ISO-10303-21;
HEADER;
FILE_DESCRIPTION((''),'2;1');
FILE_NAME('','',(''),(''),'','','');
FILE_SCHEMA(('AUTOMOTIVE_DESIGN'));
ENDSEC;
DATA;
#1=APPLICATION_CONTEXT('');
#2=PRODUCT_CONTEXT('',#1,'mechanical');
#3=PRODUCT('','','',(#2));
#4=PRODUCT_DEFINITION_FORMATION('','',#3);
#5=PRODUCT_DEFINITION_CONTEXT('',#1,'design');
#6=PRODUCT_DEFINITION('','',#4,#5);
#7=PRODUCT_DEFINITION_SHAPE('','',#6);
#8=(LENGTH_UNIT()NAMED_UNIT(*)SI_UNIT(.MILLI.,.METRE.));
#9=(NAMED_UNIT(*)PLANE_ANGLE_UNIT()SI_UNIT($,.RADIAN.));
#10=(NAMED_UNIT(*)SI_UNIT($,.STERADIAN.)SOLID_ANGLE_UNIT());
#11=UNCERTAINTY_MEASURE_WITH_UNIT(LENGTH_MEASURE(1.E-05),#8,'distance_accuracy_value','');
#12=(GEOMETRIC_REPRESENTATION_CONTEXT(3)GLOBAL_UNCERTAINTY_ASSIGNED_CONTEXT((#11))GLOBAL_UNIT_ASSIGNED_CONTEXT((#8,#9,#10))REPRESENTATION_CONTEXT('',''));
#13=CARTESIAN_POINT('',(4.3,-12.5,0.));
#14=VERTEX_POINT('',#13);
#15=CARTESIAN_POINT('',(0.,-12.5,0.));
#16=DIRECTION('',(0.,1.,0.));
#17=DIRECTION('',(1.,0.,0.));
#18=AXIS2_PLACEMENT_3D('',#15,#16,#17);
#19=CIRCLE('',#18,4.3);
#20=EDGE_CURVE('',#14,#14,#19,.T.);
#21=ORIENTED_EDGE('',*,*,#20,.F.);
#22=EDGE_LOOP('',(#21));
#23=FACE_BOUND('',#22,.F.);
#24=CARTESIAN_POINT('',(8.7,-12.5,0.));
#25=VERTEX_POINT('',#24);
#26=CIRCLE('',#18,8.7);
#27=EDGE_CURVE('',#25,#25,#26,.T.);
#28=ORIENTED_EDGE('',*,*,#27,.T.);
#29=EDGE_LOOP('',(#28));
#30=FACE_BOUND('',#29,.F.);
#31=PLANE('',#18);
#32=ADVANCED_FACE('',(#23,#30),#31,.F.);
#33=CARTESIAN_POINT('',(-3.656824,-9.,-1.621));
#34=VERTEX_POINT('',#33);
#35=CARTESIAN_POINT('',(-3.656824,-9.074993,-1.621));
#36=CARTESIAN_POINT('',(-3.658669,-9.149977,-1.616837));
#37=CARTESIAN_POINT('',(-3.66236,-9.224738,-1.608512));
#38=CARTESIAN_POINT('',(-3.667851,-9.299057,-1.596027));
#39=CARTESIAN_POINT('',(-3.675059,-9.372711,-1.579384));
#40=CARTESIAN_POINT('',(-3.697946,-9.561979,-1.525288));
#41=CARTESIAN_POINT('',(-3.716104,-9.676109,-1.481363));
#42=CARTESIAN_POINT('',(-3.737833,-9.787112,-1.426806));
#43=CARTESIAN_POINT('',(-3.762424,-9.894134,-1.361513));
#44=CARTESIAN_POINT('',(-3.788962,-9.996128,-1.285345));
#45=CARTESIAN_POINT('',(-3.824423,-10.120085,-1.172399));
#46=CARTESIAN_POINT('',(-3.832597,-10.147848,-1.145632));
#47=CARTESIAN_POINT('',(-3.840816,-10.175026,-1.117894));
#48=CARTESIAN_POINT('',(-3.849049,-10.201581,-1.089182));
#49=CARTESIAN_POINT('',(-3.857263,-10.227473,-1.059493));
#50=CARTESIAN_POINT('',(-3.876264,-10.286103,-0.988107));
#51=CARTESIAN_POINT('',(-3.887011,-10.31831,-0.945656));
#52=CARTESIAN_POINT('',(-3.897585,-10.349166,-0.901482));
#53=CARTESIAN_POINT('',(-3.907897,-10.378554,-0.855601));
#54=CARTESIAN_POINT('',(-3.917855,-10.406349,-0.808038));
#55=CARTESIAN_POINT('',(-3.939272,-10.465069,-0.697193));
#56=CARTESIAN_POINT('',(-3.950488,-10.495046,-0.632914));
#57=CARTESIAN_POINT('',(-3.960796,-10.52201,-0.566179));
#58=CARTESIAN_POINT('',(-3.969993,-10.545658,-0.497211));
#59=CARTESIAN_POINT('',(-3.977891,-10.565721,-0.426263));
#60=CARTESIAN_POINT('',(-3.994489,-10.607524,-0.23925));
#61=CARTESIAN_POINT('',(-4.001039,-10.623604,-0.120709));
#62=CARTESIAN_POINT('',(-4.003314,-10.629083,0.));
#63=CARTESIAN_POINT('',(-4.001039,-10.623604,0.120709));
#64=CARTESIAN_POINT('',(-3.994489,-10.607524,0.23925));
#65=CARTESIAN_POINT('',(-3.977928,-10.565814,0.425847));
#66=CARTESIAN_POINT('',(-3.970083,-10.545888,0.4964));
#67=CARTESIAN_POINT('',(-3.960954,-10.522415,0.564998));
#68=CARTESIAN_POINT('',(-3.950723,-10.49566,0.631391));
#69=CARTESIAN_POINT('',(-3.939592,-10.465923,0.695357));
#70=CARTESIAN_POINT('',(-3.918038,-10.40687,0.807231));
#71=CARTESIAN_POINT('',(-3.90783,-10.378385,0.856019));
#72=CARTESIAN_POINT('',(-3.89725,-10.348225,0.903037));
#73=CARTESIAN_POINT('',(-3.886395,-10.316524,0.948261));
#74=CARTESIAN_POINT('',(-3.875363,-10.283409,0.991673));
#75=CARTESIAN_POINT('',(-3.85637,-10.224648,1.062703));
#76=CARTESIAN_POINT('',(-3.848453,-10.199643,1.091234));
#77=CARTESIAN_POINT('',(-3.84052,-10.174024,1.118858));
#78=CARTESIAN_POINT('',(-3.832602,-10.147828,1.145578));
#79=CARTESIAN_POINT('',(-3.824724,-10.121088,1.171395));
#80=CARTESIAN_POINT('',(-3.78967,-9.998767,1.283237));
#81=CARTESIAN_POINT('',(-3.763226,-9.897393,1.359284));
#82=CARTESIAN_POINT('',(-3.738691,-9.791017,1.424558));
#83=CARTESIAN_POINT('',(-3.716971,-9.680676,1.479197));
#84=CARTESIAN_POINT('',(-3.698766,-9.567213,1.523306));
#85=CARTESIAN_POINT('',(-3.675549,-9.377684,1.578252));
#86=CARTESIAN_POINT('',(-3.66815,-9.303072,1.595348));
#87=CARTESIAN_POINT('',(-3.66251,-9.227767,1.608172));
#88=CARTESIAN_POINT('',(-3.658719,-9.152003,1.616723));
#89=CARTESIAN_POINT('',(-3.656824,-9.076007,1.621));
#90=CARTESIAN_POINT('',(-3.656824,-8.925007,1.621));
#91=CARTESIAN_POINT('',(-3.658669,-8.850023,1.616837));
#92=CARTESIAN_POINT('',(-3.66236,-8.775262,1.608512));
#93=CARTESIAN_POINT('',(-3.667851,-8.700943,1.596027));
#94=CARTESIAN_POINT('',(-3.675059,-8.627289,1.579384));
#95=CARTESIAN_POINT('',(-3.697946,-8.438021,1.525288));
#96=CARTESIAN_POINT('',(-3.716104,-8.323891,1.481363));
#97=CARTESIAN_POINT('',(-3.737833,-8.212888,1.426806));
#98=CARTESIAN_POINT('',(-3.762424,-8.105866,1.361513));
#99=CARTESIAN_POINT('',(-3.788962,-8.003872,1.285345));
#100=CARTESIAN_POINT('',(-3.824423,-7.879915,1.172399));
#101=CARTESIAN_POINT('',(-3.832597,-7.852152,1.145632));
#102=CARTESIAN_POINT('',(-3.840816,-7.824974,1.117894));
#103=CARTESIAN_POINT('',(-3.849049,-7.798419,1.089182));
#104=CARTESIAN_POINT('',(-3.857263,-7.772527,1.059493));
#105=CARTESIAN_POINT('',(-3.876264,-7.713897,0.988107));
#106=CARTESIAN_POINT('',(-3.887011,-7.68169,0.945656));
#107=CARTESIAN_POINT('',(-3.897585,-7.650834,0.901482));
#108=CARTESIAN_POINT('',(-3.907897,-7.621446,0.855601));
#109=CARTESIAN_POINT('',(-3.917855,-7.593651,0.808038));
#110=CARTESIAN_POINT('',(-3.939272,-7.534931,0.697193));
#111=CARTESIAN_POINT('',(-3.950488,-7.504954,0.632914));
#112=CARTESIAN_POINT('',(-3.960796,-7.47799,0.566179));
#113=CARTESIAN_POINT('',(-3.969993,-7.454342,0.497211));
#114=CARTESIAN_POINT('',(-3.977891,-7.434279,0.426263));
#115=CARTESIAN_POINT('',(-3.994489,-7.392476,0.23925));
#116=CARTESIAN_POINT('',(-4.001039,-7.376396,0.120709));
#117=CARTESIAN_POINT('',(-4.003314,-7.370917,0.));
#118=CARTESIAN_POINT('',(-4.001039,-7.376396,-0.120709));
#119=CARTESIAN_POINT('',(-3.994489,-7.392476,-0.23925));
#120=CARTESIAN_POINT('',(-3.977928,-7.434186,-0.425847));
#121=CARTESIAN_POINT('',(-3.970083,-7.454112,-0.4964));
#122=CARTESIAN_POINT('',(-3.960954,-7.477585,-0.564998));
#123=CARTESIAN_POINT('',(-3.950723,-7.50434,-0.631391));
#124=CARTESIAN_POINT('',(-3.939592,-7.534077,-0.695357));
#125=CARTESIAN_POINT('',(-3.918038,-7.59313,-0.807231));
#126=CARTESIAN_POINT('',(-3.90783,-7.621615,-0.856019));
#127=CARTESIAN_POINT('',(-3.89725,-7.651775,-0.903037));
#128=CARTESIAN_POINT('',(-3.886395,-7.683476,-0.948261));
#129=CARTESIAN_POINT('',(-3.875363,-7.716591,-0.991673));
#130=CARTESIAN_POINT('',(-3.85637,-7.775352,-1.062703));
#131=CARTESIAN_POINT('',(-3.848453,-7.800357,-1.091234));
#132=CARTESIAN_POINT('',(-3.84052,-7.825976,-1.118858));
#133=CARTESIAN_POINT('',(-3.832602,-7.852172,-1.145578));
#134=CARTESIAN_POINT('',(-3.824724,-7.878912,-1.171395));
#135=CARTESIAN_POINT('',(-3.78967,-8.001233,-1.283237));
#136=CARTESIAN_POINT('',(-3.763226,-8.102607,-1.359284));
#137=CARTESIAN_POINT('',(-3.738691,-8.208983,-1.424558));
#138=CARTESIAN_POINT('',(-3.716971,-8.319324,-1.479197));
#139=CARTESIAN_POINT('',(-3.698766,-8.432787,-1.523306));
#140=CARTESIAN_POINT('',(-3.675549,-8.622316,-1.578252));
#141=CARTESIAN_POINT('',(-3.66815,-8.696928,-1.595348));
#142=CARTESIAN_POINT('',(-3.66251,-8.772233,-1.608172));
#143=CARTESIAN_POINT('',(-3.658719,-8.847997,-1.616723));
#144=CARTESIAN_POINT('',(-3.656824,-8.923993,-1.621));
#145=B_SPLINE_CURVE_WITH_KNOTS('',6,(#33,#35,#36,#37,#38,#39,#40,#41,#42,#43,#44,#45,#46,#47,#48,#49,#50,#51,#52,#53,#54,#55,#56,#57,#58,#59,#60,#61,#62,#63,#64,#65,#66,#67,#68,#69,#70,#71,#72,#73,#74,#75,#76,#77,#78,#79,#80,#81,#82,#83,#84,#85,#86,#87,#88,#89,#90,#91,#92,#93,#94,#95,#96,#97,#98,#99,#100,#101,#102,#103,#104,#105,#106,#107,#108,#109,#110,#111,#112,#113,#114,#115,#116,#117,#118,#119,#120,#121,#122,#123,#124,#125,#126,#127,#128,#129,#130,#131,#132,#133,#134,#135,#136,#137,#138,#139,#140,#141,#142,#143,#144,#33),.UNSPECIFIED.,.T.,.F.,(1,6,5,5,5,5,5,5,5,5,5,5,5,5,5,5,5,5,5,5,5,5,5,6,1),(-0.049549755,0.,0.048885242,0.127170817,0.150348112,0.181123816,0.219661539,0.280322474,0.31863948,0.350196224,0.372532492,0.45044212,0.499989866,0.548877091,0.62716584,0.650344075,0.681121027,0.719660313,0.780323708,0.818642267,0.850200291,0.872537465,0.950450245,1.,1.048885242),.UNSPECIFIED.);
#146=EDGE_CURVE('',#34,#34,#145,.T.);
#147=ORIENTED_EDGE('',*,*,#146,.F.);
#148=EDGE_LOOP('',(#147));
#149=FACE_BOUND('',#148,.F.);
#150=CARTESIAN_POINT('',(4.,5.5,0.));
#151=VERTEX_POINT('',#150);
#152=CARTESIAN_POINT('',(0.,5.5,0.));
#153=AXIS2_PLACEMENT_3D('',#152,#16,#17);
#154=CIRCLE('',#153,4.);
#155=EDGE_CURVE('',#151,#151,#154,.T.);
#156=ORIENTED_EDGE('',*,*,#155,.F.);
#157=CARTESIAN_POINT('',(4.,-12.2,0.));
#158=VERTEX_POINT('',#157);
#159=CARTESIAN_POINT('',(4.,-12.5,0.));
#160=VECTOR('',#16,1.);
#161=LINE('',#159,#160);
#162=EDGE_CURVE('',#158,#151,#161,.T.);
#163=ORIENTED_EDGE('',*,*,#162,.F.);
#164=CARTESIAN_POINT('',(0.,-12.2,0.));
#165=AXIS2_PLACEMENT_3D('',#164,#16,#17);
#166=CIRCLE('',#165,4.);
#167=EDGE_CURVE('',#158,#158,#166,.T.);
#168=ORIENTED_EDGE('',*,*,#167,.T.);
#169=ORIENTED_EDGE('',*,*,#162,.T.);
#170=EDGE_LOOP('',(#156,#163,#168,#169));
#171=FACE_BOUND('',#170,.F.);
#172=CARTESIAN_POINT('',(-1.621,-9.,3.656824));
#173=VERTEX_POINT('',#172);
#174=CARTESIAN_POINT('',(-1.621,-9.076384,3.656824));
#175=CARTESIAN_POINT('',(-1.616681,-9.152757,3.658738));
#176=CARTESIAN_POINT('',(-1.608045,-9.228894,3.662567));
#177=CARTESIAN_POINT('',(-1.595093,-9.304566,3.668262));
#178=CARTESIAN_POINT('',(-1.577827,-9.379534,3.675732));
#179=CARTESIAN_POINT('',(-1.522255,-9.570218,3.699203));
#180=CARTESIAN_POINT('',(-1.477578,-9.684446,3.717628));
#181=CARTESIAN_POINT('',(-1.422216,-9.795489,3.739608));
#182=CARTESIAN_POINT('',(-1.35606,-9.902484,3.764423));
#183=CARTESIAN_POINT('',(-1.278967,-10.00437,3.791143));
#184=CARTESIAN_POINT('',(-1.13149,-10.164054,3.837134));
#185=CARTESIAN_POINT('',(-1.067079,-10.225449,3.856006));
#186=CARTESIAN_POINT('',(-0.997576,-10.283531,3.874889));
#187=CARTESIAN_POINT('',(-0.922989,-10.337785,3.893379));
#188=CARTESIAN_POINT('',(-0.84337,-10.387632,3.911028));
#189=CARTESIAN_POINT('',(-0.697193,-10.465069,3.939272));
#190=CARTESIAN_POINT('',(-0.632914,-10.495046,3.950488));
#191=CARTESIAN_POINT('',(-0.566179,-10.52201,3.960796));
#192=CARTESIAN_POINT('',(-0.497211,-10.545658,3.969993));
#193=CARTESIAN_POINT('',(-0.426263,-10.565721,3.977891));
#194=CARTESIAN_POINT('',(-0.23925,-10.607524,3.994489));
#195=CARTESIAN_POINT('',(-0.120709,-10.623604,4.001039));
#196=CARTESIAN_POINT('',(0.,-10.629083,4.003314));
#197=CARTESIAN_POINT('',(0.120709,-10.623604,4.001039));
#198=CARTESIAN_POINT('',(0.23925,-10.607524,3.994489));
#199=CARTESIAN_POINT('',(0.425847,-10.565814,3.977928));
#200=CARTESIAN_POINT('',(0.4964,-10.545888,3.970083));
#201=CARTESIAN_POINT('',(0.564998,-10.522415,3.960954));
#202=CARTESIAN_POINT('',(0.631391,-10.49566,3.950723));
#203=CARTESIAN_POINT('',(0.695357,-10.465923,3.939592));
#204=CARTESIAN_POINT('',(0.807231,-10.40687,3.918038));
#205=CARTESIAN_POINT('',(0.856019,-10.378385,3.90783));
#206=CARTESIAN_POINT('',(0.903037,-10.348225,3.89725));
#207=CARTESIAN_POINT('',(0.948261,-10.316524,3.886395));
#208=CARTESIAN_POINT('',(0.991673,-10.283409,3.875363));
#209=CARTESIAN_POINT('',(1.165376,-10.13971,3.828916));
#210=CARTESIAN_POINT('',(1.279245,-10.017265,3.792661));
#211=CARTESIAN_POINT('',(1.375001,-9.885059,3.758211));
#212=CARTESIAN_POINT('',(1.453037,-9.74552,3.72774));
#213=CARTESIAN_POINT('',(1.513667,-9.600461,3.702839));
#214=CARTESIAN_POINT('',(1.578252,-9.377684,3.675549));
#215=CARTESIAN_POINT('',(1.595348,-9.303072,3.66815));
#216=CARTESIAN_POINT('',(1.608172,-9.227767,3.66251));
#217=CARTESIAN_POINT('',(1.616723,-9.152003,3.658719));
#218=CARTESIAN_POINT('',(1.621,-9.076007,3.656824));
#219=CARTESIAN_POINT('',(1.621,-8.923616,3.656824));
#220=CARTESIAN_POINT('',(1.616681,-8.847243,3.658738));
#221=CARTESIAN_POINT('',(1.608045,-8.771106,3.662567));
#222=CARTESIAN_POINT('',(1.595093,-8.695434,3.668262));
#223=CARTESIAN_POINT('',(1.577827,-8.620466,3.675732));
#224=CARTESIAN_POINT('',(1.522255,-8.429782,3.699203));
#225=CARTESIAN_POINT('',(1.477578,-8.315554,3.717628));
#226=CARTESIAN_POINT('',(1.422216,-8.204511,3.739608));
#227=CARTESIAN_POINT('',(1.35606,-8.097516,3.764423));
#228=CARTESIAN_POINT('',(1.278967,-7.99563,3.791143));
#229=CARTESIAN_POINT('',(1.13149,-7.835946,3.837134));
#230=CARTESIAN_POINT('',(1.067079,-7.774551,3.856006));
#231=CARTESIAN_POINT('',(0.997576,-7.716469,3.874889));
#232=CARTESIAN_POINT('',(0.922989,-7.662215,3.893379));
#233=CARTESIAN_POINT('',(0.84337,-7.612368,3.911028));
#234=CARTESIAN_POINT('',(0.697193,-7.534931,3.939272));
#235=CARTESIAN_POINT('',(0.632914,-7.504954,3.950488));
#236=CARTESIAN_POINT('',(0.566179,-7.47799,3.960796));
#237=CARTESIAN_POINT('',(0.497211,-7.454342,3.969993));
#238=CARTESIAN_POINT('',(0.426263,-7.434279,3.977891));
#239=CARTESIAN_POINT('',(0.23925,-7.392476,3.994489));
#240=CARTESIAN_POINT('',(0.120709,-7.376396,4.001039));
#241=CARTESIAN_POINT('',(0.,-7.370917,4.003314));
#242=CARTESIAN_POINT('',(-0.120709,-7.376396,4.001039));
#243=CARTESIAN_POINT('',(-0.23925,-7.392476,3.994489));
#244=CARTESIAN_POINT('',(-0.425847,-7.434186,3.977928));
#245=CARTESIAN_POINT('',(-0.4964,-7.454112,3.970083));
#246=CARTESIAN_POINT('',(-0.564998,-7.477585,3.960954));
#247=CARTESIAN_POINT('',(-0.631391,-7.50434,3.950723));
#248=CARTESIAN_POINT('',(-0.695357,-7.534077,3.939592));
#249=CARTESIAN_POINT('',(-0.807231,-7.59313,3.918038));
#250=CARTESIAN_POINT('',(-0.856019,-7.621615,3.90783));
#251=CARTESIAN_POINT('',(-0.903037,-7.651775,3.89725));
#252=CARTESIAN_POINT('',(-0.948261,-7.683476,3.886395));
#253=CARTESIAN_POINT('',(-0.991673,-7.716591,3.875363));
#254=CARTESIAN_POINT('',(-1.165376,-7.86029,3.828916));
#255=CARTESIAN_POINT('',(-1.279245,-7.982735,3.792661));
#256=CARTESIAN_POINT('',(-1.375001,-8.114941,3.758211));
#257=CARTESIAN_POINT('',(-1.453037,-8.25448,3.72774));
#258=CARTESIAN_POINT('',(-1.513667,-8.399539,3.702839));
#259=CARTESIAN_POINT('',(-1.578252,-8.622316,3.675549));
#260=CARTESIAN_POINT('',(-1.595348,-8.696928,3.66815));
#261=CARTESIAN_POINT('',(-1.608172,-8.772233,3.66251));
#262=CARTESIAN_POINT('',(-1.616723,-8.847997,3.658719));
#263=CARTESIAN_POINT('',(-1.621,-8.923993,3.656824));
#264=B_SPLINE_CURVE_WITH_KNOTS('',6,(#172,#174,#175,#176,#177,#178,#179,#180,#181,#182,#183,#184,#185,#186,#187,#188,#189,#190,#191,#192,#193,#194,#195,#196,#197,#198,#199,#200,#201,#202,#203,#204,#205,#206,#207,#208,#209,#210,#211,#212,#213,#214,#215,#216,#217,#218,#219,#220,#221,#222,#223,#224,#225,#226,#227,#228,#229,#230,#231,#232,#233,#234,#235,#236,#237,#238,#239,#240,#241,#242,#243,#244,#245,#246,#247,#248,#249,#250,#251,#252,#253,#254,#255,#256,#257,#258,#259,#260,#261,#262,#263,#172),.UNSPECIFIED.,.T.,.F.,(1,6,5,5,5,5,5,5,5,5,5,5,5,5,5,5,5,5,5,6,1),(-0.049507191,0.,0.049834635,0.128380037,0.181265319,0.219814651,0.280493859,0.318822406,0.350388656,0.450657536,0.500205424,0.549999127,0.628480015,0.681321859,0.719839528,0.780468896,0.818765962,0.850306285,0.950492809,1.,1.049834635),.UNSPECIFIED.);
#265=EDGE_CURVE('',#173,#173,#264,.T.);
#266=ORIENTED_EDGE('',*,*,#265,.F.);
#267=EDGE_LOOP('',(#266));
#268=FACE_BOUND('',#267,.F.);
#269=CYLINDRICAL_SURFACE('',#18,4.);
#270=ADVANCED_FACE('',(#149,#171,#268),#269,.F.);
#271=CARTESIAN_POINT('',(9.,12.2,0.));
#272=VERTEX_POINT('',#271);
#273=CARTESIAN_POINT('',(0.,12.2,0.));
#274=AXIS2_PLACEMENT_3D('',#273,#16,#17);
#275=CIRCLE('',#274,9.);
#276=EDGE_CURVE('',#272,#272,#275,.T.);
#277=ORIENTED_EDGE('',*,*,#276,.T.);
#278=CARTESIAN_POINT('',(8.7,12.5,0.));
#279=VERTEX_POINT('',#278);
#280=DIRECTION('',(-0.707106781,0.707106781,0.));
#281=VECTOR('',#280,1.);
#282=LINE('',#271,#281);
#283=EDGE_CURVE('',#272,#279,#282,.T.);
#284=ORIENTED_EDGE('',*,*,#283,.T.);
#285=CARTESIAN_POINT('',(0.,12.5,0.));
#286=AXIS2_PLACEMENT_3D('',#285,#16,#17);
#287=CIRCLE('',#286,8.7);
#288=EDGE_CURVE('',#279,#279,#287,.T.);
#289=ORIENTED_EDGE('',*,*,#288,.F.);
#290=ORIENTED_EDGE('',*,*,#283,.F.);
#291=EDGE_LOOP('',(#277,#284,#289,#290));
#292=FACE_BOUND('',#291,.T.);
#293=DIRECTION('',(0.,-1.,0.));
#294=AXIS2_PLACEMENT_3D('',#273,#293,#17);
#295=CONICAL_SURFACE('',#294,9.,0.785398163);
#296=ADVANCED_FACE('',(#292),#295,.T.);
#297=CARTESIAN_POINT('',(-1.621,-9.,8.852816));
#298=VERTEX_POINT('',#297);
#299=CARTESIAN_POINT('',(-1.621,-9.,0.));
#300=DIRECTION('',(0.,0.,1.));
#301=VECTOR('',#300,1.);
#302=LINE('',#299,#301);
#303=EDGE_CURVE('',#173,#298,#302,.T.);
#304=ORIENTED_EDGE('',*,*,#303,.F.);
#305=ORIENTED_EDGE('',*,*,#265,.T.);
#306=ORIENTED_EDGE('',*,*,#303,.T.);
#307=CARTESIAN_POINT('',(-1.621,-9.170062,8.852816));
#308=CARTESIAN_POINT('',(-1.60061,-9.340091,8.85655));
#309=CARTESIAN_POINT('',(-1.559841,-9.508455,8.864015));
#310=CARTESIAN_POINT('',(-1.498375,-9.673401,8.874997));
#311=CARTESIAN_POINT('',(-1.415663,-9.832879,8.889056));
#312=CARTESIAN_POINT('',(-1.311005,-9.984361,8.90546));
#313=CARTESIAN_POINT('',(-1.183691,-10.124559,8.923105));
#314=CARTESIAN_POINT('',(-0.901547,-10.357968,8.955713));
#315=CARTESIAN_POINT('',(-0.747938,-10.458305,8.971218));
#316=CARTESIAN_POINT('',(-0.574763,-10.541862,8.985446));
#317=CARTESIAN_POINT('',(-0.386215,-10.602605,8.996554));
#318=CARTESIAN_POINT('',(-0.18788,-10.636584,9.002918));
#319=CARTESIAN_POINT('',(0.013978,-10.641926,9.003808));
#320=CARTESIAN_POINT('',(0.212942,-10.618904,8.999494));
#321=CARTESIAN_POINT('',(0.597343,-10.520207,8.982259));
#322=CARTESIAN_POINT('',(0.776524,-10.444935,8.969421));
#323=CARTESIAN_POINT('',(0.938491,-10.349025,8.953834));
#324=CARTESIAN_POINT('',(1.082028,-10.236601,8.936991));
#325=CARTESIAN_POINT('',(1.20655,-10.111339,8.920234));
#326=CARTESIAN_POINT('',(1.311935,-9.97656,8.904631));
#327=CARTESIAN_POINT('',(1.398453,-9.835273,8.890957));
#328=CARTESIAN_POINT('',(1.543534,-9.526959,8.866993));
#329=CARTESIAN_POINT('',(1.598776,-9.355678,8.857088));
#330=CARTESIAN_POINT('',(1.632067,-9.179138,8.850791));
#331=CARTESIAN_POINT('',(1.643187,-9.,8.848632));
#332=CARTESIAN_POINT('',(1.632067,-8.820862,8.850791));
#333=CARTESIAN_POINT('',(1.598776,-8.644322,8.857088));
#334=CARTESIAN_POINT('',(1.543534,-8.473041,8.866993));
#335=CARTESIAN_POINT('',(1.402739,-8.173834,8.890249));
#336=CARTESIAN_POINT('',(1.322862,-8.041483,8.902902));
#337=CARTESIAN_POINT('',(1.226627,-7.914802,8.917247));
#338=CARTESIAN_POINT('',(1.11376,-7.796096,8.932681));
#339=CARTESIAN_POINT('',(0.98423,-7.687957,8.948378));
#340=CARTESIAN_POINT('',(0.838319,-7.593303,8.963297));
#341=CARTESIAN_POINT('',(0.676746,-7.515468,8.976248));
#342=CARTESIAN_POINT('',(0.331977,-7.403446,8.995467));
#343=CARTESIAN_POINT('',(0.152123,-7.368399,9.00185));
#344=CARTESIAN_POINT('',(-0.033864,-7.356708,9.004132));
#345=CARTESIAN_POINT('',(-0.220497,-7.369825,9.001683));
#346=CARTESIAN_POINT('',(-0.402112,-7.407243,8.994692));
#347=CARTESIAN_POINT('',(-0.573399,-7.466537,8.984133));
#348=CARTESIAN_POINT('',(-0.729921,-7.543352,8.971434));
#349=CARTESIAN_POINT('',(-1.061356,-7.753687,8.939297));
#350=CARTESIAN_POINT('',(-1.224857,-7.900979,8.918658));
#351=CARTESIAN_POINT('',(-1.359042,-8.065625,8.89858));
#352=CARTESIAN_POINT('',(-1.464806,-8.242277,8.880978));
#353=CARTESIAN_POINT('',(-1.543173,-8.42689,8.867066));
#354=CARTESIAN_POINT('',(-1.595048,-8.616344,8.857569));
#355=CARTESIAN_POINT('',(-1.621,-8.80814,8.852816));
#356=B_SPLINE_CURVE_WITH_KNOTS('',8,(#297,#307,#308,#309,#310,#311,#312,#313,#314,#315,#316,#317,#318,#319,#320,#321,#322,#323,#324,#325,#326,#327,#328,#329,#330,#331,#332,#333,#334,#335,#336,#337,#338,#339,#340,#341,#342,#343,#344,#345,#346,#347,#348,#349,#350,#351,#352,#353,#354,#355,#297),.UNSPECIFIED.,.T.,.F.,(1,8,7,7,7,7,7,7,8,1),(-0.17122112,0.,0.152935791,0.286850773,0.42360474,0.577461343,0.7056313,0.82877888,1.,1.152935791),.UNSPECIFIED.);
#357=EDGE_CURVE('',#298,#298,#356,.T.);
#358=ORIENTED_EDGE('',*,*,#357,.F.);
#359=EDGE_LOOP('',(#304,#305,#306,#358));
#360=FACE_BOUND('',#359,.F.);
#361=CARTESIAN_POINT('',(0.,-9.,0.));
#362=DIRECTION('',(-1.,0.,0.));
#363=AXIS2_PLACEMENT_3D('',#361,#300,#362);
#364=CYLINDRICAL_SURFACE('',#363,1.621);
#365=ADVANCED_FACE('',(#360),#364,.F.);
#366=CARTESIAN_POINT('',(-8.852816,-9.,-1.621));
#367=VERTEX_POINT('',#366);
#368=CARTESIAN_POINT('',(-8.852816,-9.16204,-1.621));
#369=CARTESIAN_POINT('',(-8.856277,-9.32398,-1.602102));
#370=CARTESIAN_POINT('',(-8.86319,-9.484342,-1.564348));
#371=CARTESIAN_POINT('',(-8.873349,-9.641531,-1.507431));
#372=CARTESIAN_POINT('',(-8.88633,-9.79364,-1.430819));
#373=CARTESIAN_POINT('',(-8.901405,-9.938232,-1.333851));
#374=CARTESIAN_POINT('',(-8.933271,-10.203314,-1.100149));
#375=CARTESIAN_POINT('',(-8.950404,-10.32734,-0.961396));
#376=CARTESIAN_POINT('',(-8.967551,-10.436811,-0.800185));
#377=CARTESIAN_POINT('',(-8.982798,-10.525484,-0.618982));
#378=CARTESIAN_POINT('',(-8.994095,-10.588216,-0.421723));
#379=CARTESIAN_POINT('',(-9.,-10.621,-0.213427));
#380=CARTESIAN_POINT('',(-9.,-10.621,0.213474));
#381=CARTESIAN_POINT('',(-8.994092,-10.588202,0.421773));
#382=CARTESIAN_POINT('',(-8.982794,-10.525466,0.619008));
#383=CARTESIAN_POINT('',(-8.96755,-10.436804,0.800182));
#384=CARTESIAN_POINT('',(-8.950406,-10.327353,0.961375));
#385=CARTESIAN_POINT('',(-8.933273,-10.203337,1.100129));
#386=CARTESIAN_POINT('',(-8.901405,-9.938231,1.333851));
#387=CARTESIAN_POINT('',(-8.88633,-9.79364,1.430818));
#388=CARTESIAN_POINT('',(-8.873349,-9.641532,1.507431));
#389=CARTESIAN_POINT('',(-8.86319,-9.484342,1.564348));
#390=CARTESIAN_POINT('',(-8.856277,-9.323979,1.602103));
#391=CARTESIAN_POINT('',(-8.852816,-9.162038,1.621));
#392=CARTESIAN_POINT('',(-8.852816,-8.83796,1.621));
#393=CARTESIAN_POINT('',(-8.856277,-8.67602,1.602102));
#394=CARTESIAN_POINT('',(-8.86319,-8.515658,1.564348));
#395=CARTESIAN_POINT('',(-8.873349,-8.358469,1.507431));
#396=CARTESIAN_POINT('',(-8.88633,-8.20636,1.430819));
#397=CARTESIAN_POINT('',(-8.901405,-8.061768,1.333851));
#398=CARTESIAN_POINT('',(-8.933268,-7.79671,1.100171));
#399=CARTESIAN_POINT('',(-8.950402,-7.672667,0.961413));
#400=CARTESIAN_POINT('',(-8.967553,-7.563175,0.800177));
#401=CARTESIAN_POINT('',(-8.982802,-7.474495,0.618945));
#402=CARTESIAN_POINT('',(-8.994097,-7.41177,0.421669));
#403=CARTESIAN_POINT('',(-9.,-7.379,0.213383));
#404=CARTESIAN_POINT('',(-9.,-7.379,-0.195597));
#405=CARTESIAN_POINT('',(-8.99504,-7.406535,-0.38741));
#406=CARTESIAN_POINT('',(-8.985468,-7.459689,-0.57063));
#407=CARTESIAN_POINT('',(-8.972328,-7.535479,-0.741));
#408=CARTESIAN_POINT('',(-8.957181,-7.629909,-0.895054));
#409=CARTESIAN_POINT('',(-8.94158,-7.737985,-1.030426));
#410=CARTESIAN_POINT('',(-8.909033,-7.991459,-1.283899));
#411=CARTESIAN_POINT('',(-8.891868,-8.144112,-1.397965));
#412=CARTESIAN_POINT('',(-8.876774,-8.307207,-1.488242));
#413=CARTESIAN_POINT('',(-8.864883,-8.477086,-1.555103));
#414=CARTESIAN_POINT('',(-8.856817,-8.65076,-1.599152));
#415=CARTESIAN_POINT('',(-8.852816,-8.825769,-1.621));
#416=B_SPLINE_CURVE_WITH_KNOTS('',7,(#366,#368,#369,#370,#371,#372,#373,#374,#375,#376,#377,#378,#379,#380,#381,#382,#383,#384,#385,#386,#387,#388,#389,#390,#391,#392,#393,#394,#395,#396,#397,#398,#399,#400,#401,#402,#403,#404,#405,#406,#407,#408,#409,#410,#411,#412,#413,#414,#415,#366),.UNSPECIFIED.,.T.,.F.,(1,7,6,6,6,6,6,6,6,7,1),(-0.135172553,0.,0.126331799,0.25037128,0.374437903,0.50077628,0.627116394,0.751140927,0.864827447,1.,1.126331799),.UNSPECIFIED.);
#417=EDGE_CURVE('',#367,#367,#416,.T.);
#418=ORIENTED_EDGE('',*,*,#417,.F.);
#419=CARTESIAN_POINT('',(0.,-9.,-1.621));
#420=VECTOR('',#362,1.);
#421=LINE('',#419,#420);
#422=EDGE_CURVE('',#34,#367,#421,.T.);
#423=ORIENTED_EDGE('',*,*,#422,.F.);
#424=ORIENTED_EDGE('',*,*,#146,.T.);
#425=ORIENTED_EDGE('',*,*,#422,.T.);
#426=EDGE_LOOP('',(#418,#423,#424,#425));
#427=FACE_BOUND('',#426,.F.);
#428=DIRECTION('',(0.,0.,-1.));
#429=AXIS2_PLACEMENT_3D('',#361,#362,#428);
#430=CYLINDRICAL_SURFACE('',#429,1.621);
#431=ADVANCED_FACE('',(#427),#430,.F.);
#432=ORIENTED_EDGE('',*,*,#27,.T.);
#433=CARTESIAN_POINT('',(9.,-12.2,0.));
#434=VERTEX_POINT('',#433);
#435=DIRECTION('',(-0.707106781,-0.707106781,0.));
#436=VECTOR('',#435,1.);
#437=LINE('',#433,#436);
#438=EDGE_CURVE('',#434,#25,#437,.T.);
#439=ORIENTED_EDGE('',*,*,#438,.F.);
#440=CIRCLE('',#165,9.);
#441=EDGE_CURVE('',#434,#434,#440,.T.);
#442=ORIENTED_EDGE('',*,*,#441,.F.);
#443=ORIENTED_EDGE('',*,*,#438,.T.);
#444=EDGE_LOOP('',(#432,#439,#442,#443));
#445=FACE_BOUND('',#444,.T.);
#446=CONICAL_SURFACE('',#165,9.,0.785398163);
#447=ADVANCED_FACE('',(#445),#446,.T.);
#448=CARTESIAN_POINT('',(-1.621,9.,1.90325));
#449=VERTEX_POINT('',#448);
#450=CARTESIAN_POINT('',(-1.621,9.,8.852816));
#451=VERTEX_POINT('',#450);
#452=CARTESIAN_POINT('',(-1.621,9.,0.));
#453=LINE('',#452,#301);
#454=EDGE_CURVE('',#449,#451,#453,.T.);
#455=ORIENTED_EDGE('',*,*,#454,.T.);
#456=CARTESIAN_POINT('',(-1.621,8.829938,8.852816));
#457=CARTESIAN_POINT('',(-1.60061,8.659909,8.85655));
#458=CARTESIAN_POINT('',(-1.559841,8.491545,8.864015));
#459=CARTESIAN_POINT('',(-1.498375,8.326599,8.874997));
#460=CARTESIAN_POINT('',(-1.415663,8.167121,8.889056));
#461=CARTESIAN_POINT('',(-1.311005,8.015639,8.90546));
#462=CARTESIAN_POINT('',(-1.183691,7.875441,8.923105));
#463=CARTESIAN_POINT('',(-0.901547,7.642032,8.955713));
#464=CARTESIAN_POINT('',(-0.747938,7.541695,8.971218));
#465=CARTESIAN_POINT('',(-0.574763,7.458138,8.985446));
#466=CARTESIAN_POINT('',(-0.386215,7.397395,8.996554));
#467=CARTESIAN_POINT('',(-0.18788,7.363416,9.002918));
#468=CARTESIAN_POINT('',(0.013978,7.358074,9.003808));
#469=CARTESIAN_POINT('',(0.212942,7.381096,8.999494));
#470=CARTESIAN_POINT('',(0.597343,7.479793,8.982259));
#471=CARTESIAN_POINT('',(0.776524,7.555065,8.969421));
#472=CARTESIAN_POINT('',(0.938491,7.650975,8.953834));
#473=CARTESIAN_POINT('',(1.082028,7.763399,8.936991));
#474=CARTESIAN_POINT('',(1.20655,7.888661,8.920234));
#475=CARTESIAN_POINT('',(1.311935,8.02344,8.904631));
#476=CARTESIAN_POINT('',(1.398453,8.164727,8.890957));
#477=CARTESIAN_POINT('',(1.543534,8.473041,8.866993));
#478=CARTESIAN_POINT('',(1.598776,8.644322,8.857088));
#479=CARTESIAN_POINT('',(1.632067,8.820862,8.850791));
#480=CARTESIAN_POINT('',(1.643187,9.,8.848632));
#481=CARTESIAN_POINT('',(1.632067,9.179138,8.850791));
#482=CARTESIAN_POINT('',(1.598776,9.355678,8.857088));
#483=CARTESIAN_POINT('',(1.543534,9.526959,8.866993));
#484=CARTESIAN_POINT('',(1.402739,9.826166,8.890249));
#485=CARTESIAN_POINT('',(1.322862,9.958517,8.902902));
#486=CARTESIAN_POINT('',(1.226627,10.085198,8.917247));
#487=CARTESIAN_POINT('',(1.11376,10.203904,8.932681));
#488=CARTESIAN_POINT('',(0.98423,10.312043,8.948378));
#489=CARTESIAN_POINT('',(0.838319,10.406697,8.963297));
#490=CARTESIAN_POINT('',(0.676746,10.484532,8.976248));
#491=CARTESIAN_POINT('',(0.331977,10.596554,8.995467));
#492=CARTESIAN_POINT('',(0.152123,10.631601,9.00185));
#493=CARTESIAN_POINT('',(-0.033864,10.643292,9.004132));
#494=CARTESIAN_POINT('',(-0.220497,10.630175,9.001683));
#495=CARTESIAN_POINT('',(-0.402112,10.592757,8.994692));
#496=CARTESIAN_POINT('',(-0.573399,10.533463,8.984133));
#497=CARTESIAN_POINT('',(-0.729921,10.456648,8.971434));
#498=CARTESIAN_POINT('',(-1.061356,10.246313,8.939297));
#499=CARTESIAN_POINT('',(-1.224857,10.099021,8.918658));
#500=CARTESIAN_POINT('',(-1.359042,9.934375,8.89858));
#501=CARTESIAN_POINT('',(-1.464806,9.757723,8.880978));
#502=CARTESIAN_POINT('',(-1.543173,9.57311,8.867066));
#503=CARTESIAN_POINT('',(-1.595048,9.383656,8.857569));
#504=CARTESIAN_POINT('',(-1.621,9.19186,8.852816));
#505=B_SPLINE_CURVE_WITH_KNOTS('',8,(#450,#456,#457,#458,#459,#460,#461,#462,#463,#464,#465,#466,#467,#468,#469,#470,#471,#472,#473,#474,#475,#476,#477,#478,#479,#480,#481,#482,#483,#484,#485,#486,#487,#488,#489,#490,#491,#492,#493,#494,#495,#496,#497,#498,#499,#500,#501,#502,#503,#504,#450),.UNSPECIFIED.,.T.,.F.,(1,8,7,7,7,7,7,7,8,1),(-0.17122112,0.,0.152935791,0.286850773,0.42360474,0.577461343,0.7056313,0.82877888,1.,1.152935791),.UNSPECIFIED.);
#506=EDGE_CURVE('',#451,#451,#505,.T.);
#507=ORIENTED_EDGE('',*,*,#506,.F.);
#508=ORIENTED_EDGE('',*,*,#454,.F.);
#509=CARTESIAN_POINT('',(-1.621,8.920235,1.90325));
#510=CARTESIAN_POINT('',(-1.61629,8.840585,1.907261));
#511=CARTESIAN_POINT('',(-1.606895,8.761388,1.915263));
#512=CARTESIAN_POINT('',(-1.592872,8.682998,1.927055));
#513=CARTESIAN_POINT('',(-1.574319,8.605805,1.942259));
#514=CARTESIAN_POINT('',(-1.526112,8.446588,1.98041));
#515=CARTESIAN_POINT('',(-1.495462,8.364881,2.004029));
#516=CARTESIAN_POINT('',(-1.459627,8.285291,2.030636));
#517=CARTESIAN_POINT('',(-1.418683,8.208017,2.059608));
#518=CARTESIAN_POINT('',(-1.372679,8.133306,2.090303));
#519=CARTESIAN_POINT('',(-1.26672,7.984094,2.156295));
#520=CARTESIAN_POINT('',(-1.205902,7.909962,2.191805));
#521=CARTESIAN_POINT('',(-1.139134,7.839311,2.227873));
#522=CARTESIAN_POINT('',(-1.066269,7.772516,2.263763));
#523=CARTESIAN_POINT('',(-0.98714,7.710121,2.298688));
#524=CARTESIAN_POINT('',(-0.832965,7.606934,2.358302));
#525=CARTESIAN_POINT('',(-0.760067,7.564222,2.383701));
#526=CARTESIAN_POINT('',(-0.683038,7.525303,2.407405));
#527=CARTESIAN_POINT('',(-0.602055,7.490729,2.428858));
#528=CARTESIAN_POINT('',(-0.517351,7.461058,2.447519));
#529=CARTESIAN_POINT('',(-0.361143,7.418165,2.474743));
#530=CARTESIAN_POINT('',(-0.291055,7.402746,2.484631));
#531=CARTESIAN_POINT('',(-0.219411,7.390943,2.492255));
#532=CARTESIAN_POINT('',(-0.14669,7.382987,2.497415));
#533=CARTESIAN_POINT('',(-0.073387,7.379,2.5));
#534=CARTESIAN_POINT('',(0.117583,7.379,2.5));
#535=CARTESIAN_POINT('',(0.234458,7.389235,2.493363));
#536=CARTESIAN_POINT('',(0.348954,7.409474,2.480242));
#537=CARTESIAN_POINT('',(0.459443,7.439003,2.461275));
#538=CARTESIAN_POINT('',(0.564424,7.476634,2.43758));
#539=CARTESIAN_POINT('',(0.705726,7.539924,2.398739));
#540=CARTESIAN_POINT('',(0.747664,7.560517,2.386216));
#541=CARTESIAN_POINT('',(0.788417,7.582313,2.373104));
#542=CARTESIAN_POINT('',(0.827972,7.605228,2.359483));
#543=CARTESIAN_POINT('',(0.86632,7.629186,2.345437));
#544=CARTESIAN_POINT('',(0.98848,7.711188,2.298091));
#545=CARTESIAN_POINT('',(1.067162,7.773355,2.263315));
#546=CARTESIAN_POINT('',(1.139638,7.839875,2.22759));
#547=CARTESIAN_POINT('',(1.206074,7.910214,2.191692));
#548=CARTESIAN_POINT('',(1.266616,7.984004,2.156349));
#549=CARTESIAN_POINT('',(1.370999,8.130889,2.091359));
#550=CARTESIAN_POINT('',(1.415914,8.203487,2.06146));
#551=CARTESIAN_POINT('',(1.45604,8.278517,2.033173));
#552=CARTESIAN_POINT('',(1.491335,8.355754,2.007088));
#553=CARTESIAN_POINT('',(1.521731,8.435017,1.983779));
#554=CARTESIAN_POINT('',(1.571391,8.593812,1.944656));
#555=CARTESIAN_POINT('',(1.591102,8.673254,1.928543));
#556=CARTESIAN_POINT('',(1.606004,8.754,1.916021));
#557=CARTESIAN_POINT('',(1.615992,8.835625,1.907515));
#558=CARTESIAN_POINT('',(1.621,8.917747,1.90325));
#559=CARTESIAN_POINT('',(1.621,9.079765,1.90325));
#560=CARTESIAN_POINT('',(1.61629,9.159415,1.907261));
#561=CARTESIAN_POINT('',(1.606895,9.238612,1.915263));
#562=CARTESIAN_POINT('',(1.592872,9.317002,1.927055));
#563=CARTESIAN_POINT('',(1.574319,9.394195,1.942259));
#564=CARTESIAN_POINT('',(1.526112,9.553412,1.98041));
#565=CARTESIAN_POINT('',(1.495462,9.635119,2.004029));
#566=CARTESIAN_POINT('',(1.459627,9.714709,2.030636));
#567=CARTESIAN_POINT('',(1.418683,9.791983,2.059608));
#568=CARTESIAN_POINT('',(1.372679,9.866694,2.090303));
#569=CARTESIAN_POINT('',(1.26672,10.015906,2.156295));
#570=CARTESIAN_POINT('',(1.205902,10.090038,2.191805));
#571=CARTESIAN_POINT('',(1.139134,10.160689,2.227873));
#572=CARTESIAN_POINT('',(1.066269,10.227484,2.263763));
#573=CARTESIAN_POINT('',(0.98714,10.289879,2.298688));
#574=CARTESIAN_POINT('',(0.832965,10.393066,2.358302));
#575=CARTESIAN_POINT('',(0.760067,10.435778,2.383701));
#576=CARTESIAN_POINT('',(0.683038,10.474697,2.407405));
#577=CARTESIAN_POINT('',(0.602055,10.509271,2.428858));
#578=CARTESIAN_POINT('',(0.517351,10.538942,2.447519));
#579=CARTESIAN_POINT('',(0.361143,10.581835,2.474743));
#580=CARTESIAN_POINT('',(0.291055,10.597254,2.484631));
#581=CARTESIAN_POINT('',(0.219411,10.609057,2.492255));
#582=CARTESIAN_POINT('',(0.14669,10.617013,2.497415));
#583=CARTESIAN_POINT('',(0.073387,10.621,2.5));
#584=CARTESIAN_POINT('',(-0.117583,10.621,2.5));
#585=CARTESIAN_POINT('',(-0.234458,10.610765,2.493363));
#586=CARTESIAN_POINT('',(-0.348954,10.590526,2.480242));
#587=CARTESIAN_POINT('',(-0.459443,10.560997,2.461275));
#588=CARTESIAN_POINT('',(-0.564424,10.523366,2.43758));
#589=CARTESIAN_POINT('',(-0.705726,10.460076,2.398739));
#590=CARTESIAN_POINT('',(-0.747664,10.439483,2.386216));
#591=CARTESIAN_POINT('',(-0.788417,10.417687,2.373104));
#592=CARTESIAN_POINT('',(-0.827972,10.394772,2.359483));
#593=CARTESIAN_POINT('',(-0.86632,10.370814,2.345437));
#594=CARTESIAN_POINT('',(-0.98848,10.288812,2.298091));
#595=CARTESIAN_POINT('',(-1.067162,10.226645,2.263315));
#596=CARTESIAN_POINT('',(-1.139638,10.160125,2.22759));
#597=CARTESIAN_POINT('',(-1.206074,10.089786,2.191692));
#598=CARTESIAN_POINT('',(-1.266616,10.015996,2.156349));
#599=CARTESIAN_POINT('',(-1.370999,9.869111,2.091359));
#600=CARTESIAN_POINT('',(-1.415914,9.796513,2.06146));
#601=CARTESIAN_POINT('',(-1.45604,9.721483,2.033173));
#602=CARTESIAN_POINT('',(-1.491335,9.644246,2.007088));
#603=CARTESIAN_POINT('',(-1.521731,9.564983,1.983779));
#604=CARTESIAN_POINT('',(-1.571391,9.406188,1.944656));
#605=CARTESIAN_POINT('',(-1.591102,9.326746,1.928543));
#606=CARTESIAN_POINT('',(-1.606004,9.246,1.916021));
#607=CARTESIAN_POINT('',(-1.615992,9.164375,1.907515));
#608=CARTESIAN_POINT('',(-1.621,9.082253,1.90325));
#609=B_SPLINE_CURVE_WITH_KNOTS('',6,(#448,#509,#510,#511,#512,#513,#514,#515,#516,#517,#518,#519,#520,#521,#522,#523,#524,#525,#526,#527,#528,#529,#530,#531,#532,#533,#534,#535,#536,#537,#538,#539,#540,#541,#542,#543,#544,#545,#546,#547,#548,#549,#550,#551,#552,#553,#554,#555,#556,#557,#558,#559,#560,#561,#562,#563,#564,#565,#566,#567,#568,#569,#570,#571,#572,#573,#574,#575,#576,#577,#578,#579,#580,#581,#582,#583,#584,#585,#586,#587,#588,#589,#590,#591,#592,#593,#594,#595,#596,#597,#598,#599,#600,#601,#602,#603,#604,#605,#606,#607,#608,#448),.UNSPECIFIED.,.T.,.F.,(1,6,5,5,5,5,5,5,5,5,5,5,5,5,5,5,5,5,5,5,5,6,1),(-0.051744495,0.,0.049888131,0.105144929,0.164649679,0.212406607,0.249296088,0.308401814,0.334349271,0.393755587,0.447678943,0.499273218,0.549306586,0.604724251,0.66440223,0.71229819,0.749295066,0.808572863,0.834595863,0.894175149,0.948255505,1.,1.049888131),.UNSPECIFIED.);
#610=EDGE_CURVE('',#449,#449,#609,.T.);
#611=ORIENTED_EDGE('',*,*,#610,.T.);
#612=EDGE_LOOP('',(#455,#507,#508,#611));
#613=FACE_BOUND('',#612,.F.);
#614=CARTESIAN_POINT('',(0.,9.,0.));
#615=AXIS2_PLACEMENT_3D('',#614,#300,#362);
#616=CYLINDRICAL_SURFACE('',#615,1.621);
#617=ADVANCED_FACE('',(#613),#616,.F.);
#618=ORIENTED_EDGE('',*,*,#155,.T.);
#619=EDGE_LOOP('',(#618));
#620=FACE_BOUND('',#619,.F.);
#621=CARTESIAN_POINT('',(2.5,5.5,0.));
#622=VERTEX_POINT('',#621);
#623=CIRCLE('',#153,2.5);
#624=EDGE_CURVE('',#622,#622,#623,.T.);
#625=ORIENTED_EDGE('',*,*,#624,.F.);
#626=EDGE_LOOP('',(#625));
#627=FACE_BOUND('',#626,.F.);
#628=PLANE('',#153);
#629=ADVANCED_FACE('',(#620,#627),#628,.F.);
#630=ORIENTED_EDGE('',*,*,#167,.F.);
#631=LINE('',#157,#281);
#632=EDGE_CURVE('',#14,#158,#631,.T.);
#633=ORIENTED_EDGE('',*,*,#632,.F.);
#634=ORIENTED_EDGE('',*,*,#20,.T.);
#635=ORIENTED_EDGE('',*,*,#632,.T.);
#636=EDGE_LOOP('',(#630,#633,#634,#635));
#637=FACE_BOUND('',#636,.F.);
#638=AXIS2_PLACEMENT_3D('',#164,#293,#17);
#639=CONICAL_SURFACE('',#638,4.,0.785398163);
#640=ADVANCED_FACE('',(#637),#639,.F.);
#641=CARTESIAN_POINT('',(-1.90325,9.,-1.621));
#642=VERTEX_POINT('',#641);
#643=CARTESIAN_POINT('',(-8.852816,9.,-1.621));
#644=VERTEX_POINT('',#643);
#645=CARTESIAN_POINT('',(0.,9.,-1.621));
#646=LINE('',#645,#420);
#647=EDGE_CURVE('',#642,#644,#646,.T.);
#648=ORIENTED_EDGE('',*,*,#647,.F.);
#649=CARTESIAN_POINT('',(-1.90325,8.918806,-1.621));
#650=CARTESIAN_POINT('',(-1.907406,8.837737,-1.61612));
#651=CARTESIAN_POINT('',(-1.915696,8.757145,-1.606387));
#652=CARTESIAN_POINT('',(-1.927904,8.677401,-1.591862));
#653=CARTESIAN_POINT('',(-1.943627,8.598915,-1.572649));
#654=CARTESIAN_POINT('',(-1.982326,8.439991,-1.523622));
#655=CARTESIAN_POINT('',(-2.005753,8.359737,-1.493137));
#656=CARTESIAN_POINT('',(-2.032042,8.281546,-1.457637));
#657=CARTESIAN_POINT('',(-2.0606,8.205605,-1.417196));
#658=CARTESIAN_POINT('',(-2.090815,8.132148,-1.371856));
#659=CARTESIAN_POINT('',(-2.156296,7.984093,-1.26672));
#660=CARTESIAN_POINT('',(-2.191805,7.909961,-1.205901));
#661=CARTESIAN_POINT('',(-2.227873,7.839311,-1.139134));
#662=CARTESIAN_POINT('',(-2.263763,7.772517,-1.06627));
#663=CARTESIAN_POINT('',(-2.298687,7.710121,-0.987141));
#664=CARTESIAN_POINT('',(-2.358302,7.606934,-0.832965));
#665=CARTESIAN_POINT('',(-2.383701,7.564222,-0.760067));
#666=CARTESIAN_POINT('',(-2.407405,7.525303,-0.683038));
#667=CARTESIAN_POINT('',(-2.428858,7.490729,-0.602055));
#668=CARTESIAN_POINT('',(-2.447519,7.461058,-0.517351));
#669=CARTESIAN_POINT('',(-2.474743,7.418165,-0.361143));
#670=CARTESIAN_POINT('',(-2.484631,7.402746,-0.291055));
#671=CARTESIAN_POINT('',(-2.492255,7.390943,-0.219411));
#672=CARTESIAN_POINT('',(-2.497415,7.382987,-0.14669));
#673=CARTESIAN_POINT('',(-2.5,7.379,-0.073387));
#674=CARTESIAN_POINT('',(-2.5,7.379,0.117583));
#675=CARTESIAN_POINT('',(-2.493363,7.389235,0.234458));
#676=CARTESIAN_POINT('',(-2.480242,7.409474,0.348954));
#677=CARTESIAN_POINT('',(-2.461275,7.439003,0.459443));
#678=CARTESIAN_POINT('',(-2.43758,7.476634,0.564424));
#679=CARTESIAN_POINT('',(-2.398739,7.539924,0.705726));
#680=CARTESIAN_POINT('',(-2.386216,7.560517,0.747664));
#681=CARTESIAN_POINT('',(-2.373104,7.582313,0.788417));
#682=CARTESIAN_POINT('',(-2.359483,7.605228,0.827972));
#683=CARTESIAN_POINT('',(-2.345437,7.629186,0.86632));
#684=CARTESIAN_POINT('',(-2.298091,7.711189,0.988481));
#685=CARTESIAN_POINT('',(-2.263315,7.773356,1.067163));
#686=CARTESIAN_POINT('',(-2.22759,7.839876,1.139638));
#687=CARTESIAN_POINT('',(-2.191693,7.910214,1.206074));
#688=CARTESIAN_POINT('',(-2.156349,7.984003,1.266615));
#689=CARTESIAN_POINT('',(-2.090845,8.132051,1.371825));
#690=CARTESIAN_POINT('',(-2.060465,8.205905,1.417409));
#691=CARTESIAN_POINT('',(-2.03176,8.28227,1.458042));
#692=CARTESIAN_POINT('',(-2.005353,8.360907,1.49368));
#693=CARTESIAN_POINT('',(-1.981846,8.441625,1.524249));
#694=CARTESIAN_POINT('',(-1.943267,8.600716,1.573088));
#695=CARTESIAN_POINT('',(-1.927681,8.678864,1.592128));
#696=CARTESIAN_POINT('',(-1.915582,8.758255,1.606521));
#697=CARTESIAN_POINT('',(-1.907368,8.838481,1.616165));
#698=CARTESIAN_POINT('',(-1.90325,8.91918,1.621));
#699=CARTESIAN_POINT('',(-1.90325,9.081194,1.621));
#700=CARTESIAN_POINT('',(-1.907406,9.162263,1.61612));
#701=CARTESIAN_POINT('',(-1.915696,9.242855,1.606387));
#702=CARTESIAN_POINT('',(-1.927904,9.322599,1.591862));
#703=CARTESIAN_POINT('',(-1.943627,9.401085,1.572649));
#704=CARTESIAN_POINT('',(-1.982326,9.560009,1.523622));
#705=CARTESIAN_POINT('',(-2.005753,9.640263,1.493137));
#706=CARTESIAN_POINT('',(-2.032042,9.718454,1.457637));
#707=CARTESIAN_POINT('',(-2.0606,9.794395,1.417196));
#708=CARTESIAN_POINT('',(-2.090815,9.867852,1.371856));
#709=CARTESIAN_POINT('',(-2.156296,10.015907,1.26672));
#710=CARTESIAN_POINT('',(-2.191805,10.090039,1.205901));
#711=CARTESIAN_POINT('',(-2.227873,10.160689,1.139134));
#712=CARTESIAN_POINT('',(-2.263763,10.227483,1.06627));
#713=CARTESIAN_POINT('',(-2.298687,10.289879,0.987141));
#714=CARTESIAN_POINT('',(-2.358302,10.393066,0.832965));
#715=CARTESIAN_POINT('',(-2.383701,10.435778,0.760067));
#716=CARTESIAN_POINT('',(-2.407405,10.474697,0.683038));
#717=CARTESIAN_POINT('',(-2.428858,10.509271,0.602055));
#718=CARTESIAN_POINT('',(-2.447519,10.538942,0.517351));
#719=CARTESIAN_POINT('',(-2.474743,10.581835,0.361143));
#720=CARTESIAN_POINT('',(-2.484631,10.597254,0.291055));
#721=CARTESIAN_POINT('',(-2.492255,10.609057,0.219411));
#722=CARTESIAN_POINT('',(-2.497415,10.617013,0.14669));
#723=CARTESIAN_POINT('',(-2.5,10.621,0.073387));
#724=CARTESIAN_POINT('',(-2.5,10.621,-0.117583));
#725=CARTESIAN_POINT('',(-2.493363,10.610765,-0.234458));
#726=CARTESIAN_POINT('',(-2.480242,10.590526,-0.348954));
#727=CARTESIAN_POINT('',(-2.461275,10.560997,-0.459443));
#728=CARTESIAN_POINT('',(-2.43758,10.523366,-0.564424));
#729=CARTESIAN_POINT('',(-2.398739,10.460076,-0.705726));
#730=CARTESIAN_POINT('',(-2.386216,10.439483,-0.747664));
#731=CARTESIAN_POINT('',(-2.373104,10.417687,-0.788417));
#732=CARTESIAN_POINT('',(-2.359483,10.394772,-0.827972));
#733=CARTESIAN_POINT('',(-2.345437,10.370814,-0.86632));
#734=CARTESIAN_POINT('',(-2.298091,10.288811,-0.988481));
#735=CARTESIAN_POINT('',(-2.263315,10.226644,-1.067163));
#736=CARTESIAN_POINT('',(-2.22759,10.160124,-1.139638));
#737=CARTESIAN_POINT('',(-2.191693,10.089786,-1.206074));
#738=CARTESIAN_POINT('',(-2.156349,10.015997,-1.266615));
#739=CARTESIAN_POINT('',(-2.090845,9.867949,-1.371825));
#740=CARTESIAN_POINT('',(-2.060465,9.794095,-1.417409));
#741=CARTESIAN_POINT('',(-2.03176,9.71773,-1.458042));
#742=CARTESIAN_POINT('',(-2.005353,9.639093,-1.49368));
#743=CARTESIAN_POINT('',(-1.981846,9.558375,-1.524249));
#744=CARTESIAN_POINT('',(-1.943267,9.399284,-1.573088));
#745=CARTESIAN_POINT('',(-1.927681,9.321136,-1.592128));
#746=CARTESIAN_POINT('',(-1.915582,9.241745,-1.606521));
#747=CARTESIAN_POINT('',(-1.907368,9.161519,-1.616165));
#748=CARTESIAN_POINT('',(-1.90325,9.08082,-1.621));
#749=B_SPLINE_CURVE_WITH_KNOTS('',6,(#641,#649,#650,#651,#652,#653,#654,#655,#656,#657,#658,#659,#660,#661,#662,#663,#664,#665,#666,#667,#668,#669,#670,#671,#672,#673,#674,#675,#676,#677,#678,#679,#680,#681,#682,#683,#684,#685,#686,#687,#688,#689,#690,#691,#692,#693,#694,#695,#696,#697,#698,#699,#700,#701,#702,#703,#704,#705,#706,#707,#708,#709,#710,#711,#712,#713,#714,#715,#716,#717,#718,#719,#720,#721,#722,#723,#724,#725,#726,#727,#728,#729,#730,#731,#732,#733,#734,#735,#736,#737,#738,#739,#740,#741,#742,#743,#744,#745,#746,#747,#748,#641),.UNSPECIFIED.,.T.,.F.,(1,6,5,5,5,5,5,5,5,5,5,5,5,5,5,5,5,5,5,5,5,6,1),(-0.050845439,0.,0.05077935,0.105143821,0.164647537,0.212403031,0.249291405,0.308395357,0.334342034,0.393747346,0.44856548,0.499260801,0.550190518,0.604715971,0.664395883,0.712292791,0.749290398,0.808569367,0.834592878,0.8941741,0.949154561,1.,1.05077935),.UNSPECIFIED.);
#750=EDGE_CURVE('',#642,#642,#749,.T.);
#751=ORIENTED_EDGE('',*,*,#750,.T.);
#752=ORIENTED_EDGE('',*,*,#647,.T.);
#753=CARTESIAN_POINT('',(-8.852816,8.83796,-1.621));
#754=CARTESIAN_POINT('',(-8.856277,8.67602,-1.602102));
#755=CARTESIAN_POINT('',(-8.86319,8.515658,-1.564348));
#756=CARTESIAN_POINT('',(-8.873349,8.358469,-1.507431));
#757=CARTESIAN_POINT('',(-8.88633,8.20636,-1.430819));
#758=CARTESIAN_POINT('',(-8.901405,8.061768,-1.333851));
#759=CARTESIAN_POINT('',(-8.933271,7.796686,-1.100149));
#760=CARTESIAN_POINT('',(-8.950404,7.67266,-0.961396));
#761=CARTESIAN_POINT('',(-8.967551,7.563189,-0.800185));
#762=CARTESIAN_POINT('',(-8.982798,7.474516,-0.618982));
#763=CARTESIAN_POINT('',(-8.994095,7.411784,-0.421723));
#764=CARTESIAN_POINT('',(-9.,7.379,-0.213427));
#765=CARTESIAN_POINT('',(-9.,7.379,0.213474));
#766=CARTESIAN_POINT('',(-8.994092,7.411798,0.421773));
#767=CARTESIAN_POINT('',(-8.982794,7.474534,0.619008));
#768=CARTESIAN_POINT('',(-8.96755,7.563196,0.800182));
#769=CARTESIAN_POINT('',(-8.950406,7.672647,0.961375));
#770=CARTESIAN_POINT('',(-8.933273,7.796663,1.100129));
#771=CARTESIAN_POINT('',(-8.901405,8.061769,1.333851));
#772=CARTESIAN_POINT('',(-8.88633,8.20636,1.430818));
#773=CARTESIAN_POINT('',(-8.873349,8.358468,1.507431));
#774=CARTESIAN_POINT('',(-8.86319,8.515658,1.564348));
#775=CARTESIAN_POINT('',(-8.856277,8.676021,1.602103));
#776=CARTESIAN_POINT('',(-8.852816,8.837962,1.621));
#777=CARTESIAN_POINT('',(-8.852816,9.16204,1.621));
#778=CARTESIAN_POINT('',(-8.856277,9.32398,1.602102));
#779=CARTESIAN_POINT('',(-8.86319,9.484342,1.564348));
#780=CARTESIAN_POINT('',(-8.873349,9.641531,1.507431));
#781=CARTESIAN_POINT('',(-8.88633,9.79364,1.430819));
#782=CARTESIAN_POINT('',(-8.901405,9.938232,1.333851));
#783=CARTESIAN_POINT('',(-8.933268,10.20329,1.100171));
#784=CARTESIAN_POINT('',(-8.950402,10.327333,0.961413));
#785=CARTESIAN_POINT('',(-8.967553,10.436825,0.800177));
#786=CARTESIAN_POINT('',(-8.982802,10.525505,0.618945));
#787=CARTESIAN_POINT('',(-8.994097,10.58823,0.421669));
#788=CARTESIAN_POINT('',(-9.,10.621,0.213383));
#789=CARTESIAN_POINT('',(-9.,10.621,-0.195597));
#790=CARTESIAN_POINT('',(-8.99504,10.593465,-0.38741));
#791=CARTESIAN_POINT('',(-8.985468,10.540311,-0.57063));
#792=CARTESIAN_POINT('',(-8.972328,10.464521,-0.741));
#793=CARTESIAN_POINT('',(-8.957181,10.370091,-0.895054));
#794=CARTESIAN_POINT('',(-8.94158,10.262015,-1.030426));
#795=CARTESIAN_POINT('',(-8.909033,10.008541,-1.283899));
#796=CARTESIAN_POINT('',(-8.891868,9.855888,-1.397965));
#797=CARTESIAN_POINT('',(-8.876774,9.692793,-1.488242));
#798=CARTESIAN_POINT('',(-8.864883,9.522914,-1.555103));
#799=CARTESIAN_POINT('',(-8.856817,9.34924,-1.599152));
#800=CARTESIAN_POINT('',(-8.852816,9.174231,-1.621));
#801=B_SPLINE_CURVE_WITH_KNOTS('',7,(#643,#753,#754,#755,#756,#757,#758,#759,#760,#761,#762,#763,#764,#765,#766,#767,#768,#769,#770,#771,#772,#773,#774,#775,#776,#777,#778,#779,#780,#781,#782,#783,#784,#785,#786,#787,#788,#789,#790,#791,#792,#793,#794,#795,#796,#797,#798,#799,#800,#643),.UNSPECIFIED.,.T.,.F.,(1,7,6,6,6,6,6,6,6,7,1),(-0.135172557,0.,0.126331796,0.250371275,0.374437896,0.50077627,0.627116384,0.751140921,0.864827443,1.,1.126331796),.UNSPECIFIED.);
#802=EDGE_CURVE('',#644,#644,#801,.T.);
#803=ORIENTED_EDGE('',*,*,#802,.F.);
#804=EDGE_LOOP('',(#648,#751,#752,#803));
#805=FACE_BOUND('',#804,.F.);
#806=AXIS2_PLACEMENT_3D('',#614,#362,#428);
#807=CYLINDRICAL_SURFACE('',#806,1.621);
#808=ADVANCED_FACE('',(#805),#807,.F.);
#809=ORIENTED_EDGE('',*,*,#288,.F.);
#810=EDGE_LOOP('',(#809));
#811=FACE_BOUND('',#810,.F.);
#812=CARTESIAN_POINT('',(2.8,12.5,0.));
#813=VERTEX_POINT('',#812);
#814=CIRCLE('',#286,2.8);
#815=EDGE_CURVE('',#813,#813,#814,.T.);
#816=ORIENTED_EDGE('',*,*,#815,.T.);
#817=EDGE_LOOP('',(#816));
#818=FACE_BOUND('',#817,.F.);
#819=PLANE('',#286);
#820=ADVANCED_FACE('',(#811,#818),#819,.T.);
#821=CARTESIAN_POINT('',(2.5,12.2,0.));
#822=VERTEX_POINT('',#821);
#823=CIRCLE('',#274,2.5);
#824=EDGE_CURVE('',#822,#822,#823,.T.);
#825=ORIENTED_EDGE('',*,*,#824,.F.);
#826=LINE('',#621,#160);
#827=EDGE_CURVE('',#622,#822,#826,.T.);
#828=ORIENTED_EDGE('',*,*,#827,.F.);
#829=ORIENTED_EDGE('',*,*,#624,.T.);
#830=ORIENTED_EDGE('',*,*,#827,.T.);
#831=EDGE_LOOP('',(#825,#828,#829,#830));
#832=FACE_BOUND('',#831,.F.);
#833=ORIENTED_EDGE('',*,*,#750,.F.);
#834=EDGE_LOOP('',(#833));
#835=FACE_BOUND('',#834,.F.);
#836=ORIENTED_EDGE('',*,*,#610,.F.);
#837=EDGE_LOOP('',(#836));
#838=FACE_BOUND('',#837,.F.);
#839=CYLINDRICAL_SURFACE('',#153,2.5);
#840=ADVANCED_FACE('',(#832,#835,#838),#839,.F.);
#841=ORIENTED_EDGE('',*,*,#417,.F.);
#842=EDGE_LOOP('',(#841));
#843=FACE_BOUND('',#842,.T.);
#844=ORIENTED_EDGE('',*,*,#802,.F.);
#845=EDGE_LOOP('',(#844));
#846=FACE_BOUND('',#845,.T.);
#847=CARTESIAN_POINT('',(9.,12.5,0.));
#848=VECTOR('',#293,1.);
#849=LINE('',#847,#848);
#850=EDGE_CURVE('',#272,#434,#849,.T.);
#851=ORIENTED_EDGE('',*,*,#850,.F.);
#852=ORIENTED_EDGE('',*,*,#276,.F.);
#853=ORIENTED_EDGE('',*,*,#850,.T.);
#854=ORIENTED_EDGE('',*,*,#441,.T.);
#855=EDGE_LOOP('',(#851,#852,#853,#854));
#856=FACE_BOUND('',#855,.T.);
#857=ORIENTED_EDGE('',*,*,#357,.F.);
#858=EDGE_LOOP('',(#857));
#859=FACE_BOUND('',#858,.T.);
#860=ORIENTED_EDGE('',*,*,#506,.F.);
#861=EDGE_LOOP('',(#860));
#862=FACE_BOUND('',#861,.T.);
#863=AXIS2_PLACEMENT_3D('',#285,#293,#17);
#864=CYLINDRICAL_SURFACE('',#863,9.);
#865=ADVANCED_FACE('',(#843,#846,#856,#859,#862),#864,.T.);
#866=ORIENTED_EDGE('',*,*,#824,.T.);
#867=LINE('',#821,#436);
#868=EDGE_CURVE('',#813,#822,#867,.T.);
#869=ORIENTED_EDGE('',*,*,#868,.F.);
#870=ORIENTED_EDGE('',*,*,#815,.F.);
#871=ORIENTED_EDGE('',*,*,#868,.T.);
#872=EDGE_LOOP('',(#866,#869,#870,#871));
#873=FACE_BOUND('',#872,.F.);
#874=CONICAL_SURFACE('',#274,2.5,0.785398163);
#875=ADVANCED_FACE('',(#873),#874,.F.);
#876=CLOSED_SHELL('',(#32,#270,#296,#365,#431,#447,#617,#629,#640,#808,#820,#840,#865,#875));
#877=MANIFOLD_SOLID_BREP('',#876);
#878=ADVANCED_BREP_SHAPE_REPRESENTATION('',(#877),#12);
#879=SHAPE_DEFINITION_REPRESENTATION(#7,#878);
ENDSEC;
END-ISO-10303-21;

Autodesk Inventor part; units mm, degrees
ref_plane "YZ Plane" through (0, 0, 0) normal (1, 0, 0) x (0, 1, 0)
ref_plane "XZ Plane" through (0, 0, 0) normal (0, 1, 0) x (-1, 0, 0)
ref_plane "XY Plane" through (0, 0, 0) normal (0, 0, 1) x (1, 0, 0)
sketch "Sketch1" plane through (0, 0, 0) normal (0, 0, 1) x (1, 0, 0)
  line L0 (0, -12.5) -> (0, 12.5)
  line L1 (9, 12.5) -> (9, -12.5)
  line L2 (9, -12.5) -> (4, -12.5)
  line L3 (4, -12.5) -> (4, 5.5)
  line L4 (4, 5.5) -> (2.5, 5.5)
  line L5 (2.5, 5.5) -> (2.5, 12.5)
  line L6 (2.5, 12.5) -> (9, 12.5)
  point P0 (0, 0)
  point P1 (0, 0)
  dimension "d0" = 18
  dimension "d1" = 25
  dimension "d2" = 8
  dimension "d3" = 5
  dimension "d4" = 18
revolve "Revolution1" add sketch "Sketch1" angle 360 about axis through (0, -12.5, 0) along (0, 1, 0)
sketch "Sketch2" plane through (0, 0, 0) normal (1, 0, 0) x (0, 1, 0)
  line L0 (12.5, -2.5) -> (12.5, 2.5) projected
  line L1 (-12.5, -4) -> (-12.5, 4) projected
  point P0 (0, 0)
  point P1 (9, 0)
  point P2 (-9, 0)
  dimension "d6" = 3.5
  dimension "d7" = 3.5
hole "Hole1" at (0, 9, 0) at (0, -9, 0) direction (-1, 0, 0) diameter 3.242 end through all thread size "M4x0.7" class "6H" standard "ANSI Metric M Profile"
chamfer "Chamfer1" distance 0.3 angle 45 4 edges at (-9, 12.5, 0) (-2.5, 12.5, 0) (-9, -12.5, 0) (-4, -12.5, 0)
pattern_circular "Circular Pattern1" count 2 over 90 about axis through (0, 0, 0) along (0, 1, 0) of "Hole1"
properties part number "spring-shaft-coupler" material "Aluminum 6061-AHC"
